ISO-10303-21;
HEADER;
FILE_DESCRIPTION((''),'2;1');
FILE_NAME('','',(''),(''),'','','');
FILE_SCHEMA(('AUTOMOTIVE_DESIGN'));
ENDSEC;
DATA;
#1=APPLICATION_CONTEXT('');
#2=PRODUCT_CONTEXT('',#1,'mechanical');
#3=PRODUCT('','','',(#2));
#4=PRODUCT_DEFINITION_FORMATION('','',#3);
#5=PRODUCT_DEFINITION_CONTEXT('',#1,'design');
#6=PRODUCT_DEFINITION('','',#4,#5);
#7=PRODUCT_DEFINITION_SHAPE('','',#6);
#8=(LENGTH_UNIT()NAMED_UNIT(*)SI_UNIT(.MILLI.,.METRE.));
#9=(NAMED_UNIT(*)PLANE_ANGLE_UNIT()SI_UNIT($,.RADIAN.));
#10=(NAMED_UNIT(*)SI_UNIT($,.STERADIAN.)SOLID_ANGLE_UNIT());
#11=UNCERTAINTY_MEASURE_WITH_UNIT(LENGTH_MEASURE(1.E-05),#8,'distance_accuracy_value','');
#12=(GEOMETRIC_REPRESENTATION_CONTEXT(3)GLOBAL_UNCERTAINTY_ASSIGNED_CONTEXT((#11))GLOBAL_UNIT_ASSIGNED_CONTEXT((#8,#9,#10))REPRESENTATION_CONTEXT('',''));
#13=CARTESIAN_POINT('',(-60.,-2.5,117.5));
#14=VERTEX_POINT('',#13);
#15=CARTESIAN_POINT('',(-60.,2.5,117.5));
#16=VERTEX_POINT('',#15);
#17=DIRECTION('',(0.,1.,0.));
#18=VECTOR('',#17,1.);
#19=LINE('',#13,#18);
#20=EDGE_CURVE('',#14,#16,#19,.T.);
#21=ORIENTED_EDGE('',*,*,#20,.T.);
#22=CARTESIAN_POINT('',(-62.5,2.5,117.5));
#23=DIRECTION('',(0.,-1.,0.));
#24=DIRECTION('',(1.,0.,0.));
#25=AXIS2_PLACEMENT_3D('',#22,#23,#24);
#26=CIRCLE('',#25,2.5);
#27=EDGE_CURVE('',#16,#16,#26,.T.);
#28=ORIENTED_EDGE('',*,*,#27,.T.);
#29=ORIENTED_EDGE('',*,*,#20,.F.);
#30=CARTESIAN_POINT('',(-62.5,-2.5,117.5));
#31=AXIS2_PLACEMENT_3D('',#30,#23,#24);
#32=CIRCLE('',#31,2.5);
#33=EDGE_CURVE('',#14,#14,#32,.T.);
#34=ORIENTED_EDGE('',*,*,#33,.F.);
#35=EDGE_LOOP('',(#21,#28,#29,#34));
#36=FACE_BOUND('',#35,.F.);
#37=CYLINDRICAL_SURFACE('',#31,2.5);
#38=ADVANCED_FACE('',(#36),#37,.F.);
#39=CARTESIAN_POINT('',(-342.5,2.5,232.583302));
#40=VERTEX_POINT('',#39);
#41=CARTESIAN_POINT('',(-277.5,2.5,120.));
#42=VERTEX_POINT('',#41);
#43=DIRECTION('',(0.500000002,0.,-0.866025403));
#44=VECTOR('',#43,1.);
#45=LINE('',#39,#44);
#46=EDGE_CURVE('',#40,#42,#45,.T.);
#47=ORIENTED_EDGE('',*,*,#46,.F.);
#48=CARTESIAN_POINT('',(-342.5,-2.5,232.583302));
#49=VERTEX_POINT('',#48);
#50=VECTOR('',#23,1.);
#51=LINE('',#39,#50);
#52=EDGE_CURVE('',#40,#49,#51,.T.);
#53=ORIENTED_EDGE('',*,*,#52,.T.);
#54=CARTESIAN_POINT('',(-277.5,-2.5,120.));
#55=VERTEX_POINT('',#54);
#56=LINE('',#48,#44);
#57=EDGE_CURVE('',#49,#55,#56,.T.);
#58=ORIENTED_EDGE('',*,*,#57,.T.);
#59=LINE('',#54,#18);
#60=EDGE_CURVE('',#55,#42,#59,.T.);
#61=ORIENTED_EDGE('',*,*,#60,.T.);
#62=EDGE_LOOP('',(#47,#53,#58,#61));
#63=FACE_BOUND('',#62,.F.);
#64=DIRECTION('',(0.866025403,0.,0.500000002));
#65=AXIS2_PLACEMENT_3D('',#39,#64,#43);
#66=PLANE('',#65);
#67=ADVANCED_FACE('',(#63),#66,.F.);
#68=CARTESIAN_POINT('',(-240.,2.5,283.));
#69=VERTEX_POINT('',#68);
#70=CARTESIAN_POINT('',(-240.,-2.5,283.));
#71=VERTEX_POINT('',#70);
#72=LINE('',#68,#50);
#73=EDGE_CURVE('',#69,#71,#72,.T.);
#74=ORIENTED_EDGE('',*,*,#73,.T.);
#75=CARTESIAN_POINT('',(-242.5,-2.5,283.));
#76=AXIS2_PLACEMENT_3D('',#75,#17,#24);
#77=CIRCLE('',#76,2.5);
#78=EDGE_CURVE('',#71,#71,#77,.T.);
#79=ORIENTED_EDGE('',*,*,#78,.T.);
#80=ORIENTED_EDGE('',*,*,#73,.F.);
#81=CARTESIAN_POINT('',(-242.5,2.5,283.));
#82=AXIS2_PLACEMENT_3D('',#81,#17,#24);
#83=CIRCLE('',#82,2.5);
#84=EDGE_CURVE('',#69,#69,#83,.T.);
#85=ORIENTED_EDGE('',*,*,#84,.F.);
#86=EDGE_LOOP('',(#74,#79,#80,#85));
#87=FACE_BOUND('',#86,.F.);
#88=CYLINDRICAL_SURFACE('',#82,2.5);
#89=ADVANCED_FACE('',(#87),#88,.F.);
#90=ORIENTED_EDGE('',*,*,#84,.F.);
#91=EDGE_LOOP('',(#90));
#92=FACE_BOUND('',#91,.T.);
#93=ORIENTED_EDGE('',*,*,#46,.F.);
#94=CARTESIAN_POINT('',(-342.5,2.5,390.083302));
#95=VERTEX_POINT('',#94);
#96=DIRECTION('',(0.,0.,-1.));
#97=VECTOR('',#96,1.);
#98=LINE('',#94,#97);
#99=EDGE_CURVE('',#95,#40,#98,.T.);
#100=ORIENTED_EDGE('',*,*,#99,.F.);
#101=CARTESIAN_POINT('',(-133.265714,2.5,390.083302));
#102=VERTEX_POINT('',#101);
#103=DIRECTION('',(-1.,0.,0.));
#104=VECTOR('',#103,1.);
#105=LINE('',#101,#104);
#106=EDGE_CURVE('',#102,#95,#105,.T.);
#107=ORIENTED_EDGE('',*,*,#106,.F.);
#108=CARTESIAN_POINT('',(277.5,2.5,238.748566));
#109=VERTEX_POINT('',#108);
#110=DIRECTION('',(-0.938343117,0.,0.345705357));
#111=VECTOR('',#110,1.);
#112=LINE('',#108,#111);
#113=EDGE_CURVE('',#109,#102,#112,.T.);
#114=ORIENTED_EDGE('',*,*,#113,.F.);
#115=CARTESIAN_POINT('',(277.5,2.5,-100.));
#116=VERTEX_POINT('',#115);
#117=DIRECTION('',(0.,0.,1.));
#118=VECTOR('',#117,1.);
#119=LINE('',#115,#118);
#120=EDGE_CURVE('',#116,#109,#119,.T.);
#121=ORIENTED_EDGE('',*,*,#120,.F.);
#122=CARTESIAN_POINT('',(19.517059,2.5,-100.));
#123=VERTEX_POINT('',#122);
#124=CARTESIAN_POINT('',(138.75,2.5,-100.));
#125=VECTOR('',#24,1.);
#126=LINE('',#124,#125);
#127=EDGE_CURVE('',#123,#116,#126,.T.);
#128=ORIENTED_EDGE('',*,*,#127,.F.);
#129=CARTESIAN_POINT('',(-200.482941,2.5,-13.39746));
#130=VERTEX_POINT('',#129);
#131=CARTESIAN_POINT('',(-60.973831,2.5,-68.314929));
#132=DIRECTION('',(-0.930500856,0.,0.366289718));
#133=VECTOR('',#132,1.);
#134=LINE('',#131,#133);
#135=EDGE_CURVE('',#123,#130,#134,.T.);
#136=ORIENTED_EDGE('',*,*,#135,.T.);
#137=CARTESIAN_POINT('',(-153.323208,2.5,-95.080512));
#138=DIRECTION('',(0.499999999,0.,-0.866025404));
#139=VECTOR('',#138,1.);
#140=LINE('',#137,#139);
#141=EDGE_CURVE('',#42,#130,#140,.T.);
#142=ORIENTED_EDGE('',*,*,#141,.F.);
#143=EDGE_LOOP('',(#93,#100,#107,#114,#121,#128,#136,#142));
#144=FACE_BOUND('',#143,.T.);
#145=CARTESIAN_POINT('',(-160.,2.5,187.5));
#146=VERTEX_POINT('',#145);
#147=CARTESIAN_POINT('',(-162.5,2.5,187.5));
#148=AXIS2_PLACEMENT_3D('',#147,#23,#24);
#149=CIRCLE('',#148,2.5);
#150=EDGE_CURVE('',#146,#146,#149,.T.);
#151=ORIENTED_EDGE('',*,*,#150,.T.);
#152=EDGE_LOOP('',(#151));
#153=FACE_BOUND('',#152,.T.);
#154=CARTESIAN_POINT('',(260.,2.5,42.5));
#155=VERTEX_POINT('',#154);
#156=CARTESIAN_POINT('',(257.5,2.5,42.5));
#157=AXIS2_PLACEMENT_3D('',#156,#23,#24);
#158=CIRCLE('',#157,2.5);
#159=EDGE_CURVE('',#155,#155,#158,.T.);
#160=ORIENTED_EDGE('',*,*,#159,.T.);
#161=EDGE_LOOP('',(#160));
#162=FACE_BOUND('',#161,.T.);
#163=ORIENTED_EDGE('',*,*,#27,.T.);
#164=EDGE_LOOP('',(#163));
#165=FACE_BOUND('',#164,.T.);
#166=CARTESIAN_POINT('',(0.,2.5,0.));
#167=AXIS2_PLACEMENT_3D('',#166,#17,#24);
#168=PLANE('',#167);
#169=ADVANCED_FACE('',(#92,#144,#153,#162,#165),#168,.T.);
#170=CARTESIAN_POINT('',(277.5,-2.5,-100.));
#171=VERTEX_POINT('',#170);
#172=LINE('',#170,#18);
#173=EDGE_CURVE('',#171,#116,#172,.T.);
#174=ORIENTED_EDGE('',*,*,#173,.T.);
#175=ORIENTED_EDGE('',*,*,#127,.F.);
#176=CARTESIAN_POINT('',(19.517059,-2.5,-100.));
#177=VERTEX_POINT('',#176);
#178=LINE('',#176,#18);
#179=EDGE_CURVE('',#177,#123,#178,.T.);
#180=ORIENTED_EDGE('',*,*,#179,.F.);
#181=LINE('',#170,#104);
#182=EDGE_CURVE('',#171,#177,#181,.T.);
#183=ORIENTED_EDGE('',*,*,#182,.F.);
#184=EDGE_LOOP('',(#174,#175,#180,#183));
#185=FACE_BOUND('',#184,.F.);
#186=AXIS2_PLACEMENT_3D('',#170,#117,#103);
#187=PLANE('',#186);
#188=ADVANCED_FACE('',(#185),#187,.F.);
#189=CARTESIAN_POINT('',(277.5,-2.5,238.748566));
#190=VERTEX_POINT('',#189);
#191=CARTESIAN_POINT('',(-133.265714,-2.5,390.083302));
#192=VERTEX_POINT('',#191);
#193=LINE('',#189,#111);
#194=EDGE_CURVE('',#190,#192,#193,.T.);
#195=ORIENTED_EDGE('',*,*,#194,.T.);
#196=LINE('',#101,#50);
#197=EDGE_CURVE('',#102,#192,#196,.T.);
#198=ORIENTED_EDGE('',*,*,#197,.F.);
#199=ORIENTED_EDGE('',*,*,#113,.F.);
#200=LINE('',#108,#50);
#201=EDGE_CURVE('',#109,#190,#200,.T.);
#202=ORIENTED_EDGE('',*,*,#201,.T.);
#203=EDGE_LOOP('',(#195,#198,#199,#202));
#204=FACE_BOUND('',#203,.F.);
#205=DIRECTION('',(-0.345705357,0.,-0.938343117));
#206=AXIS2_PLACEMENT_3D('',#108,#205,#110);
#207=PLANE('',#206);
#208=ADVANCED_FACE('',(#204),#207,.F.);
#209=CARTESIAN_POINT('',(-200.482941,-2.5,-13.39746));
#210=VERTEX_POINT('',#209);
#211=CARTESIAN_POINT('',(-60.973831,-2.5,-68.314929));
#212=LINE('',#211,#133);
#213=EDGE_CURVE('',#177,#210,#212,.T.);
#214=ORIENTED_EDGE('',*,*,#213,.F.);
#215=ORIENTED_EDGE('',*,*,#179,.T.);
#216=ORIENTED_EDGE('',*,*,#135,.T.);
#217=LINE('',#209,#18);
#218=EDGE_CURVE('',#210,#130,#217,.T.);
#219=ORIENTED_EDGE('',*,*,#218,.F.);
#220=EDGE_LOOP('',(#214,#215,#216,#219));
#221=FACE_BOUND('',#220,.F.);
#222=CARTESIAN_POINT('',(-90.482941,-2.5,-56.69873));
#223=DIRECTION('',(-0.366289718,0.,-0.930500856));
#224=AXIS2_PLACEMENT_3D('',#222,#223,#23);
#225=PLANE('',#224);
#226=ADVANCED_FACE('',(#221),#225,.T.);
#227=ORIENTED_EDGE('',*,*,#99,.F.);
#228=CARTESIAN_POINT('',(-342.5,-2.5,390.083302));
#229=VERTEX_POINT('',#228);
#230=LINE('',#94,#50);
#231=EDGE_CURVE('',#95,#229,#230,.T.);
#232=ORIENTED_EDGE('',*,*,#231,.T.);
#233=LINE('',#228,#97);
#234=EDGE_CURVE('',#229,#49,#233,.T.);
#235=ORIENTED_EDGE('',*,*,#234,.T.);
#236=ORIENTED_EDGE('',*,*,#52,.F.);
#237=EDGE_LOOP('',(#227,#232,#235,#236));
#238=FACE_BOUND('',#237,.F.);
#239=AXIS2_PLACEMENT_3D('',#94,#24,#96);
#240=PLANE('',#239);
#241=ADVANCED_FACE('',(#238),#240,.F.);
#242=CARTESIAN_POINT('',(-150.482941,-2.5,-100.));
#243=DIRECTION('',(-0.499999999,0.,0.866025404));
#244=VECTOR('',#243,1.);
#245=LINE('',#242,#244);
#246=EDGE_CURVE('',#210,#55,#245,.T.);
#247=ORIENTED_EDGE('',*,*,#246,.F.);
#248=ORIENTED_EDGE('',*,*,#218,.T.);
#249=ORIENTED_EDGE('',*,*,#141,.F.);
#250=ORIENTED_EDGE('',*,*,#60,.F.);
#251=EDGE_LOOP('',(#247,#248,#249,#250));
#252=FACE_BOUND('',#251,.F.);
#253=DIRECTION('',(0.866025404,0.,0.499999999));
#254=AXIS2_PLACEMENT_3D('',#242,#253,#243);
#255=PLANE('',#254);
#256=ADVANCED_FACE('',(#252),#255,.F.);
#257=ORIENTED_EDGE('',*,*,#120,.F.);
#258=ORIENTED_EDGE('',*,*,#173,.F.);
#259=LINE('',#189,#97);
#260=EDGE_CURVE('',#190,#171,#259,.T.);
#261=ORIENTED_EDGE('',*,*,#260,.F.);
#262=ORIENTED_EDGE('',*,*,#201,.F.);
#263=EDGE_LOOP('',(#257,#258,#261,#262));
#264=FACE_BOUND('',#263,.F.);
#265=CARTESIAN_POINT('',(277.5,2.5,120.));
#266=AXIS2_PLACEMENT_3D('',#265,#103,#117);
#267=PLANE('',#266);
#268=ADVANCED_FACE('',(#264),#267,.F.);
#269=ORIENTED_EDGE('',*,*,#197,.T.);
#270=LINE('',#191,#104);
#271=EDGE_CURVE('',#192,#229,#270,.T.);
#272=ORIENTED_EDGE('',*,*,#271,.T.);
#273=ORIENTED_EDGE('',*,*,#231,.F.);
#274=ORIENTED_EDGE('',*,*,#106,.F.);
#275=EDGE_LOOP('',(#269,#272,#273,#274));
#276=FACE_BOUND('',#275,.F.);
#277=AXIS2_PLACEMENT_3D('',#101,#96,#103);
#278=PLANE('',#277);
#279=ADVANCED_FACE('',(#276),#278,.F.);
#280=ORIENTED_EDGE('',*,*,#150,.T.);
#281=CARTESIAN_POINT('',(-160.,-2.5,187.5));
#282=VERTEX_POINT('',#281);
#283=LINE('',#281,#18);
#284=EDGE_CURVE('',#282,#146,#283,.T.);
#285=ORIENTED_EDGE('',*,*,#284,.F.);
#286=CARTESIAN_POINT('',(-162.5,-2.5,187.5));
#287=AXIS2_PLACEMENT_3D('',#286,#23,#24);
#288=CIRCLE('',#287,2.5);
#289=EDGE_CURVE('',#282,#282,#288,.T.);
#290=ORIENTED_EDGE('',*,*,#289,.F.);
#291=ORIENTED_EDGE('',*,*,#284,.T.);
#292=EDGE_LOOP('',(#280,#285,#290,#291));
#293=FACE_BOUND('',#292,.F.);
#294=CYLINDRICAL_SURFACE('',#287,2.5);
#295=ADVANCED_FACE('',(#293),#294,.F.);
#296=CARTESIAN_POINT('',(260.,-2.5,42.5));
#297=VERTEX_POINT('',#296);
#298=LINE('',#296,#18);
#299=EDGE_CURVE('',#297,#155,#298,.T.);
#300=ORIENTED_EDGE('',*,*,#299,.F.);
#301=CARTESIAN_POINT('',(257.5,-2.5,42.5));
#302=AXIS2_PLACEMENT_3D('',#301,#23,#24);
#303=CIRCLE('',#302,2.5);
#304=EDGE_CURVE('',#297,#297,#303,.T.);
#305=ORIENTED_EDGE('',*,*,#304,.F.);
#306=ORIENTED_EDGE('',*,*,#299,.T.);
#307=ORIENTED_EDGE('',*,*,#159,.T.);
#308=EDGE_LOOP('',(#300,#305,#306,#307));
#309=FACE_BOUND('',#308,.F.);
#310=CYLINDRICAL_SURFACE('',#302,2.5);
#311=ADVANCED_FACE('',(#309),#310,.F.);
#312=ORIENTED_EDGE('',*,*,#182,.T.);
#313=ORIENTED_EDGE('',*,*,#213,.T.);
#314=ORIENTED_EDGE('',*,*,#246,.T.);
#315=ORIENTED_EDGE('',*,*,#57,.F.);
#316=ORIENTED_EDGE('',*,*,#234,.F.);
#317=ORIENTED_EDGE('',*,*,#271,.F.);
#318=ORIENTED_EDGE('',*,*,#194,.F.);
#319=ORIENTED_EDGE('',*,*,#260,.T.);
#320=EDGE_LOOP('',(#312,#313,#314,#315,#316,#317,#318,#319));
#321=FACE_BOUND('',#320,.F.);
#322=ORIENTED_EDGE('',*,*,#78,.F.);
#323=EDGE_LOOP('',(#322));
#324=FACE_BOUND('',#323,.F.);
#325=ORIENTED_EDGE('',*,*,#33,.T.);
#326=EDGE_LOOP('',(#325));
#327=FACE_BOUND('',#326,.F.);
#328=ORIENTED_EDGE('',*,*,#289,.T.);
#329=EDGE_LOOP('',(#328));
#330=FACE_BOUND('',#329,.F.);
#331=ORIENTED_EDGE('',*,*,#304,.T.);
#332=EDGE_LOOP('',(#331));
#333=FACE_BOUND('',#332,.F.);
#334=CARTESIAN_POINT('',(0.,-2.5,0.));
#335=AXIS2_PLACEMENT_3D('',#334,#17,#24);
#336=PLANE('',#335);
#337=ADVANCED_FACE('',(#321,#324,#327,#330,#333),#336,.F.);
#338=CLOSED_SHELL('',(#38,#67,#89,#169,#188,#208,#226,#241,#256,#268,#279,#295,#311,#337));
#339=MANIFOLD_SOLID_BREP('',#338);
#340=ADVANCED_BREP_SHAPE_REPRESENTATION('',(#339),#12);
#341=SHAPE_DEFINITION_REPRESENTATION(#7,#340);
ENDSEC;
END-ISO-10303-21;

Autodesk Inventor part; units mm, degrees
ref_plane "YZ Plane" through (0, 0, 0) normal (1, 0, 0) x (0, 1, 0)
ref_plane "XZ Plane" through (0, 0, 0) normal (0, 1, 0) x (-1, 0, 0)
ref_plane "XY Plane" through (0, 0, 0) normal (0, 0, 1) x (1, 0, 0)
sketch "スケッチ1" plane through (0, 0, 0) normal (0, 1, 0) x (-1, 0, 0)
  line L0 (-277.5, 277.5) -> (277.5, 277.5)
  line L1 (277.5, 277.5) -> (277.5, -277.5)
  line L2 (277.5, -277.5) -> (-277.5, -277.5)
  line L3 (-277.5, -277.5) -> (-277.5, 277.5)
  line L4 (-277.5, 277.5) -> (277.5, -277.5) construction
  line L5 (277.5, 277.5) -> (-277.5, -277.5) construction
  point P0 (0, 0)
  dimension "d0" = 555
  dimension "d1" = 555
extrude "押し出し1" add sketch "スケッチ1" along normal mid plane 5
sketch "スケッチ3" plane through (0, -2.5, 0) normal (0, -1, 0) x (1, 0, 0)
  circle A0 centre (-62.5, 117.5) radius 2.5
  line L0 (277.5, -277.5) -> (277.5, 277.5) projected
  line L1 (-277.5, -277.5) -> (277.5, -277.5) projected
  circle A1 centre (-162.5, 187.5) radius 2.5
  circle A2 centre (257.5, 42.5) radius 2.5
  point P0 (0, 0)
  dimension "d10" = 5
  dimension "d15" = 5
  dimension "d16" = 320
  dimension "d17" = 20
  dimension "d18" = 5
  dimension "d24" = 75
  dimension "d25" = 320
  dimension "d26" = 420
  dimension "d27" = 145
extrude "押し出し4" cut sketch "スケッチ3" against normal through all
sketch "スケッチ5" plane through (0, -2.5, 0) normal (0, -1, 0) x (1, 0, 0)
  line L0 (277.5, 250) -> (-277.5, 250)
  line L1 (-250, 277.5) -> (-250, -277.5) construction
  line L2 (-277.5, -250) -> (277.5, -250)
  line L3 (250, -277.5) -> (250, 277.5) construction
  line L4 (-277.5, 277.5) -> (277.5, 277.5)
  line L5 (-150, 277.5) -> (277.5, 120)
  line L6 (277.5, 277.5) -> (277.5, -277.5)
  line L7 (-277.5, -277.5) -> (-277.5, 277.5)
  line L8 (-277.5, 120) -> (-150.482941, -100)
  line L9 (-150.482941, -100) -> (277.5, -100)
  line L10 (277.5, -277.5) -> (277.5, 277.5)
  point P0 (0, 0)
  dimension "d32" = 100
  dimension "d33" = 130
  dimension "d34" = 350
  dimension "d35" = 60
  dimension "d46" = 220
sketch "スケッチ5 outline for 押し出し5" plane through (0, -2.5, 0) normal (0, -1, 0) x (1, 0, 0)
  line L0 (277.5, 120) -> (277.5, 277.5)
  line L1 (-150, 277.5) -> (277.5, 120)
  line L2 (277.5, 277.5) -> (-150, 277.5)
  line L3 (-277.5, 120) -> (-277.5, -277.5)
  line L4 (-150.482941, -100) -> (-277.5, 120)
  line L5 (277.5, -100) -> (-150.482941, -100)
  line L6 (277.5, -277.5) -> (277.5, -100)
  line L7 (-277.5, -277.5) -> (277.5, -277.5)
extrude "押し出し5" cut sketch "スケッチ5 outline for 押し出し5" against normal through all
chamfer "面取り2" distance 170 distance2 100 1 edges at (-150.4829, 0, -100) measured on face at (134.839, -0.8333, -100)
sketch "スケッチ6" plane through (0, 2.5, 0) normal (0, 1, 0) x (1, 0, 0)
  line L0 (277.5, -120) -> (-150, -277.5)
  line L1 (277.5, -120) -> (277.5, -238.748566)
  line L2 (277.5, -238.748566) -> (-133.265714, -390.083302)
  line L3 (-133.265714, -390.083302) -> (-342.5, -390.083302)
  line L4 (-342.5, -390.083302) -> (-342.5, -232.583302)
  line L5 (-277.5, -277.5) -> (-277.5, -120)
  line L6 (-342.5, -232.583302) -> (-277.5, -120)
  line L7 (-200.482941, 13.39746) -> (-277.5, -120)
  line L8 (-277.5, -277.5) -> (-150, -277.5)
  point P0 (0, 0)
  dimension "d47" = 157.5
  dimension "d55" = 620
extrude "押し出し6" add sketch "スケッチ6" against normal blind 5
sketch "スケッチ7" plane through (0, 2.5, 0) normal (0, 1, 0) x (1, 0, 0)
  circle A0 centre (-242.5, -283) radius 2.5
  line L0 (277.5, -238.748566) -> (277.5, 100)
  line L1 (277.5, 100) -> (19.517059, 100)
  point P0 (0, 0)
  dimension "d50" = 5
  dimension "d51" = 520
  dimension "d52" = 383
extrude "押し出し7" cut sketch "スケッチ7" against normal through all
properties part number "endplate(flap4)"
